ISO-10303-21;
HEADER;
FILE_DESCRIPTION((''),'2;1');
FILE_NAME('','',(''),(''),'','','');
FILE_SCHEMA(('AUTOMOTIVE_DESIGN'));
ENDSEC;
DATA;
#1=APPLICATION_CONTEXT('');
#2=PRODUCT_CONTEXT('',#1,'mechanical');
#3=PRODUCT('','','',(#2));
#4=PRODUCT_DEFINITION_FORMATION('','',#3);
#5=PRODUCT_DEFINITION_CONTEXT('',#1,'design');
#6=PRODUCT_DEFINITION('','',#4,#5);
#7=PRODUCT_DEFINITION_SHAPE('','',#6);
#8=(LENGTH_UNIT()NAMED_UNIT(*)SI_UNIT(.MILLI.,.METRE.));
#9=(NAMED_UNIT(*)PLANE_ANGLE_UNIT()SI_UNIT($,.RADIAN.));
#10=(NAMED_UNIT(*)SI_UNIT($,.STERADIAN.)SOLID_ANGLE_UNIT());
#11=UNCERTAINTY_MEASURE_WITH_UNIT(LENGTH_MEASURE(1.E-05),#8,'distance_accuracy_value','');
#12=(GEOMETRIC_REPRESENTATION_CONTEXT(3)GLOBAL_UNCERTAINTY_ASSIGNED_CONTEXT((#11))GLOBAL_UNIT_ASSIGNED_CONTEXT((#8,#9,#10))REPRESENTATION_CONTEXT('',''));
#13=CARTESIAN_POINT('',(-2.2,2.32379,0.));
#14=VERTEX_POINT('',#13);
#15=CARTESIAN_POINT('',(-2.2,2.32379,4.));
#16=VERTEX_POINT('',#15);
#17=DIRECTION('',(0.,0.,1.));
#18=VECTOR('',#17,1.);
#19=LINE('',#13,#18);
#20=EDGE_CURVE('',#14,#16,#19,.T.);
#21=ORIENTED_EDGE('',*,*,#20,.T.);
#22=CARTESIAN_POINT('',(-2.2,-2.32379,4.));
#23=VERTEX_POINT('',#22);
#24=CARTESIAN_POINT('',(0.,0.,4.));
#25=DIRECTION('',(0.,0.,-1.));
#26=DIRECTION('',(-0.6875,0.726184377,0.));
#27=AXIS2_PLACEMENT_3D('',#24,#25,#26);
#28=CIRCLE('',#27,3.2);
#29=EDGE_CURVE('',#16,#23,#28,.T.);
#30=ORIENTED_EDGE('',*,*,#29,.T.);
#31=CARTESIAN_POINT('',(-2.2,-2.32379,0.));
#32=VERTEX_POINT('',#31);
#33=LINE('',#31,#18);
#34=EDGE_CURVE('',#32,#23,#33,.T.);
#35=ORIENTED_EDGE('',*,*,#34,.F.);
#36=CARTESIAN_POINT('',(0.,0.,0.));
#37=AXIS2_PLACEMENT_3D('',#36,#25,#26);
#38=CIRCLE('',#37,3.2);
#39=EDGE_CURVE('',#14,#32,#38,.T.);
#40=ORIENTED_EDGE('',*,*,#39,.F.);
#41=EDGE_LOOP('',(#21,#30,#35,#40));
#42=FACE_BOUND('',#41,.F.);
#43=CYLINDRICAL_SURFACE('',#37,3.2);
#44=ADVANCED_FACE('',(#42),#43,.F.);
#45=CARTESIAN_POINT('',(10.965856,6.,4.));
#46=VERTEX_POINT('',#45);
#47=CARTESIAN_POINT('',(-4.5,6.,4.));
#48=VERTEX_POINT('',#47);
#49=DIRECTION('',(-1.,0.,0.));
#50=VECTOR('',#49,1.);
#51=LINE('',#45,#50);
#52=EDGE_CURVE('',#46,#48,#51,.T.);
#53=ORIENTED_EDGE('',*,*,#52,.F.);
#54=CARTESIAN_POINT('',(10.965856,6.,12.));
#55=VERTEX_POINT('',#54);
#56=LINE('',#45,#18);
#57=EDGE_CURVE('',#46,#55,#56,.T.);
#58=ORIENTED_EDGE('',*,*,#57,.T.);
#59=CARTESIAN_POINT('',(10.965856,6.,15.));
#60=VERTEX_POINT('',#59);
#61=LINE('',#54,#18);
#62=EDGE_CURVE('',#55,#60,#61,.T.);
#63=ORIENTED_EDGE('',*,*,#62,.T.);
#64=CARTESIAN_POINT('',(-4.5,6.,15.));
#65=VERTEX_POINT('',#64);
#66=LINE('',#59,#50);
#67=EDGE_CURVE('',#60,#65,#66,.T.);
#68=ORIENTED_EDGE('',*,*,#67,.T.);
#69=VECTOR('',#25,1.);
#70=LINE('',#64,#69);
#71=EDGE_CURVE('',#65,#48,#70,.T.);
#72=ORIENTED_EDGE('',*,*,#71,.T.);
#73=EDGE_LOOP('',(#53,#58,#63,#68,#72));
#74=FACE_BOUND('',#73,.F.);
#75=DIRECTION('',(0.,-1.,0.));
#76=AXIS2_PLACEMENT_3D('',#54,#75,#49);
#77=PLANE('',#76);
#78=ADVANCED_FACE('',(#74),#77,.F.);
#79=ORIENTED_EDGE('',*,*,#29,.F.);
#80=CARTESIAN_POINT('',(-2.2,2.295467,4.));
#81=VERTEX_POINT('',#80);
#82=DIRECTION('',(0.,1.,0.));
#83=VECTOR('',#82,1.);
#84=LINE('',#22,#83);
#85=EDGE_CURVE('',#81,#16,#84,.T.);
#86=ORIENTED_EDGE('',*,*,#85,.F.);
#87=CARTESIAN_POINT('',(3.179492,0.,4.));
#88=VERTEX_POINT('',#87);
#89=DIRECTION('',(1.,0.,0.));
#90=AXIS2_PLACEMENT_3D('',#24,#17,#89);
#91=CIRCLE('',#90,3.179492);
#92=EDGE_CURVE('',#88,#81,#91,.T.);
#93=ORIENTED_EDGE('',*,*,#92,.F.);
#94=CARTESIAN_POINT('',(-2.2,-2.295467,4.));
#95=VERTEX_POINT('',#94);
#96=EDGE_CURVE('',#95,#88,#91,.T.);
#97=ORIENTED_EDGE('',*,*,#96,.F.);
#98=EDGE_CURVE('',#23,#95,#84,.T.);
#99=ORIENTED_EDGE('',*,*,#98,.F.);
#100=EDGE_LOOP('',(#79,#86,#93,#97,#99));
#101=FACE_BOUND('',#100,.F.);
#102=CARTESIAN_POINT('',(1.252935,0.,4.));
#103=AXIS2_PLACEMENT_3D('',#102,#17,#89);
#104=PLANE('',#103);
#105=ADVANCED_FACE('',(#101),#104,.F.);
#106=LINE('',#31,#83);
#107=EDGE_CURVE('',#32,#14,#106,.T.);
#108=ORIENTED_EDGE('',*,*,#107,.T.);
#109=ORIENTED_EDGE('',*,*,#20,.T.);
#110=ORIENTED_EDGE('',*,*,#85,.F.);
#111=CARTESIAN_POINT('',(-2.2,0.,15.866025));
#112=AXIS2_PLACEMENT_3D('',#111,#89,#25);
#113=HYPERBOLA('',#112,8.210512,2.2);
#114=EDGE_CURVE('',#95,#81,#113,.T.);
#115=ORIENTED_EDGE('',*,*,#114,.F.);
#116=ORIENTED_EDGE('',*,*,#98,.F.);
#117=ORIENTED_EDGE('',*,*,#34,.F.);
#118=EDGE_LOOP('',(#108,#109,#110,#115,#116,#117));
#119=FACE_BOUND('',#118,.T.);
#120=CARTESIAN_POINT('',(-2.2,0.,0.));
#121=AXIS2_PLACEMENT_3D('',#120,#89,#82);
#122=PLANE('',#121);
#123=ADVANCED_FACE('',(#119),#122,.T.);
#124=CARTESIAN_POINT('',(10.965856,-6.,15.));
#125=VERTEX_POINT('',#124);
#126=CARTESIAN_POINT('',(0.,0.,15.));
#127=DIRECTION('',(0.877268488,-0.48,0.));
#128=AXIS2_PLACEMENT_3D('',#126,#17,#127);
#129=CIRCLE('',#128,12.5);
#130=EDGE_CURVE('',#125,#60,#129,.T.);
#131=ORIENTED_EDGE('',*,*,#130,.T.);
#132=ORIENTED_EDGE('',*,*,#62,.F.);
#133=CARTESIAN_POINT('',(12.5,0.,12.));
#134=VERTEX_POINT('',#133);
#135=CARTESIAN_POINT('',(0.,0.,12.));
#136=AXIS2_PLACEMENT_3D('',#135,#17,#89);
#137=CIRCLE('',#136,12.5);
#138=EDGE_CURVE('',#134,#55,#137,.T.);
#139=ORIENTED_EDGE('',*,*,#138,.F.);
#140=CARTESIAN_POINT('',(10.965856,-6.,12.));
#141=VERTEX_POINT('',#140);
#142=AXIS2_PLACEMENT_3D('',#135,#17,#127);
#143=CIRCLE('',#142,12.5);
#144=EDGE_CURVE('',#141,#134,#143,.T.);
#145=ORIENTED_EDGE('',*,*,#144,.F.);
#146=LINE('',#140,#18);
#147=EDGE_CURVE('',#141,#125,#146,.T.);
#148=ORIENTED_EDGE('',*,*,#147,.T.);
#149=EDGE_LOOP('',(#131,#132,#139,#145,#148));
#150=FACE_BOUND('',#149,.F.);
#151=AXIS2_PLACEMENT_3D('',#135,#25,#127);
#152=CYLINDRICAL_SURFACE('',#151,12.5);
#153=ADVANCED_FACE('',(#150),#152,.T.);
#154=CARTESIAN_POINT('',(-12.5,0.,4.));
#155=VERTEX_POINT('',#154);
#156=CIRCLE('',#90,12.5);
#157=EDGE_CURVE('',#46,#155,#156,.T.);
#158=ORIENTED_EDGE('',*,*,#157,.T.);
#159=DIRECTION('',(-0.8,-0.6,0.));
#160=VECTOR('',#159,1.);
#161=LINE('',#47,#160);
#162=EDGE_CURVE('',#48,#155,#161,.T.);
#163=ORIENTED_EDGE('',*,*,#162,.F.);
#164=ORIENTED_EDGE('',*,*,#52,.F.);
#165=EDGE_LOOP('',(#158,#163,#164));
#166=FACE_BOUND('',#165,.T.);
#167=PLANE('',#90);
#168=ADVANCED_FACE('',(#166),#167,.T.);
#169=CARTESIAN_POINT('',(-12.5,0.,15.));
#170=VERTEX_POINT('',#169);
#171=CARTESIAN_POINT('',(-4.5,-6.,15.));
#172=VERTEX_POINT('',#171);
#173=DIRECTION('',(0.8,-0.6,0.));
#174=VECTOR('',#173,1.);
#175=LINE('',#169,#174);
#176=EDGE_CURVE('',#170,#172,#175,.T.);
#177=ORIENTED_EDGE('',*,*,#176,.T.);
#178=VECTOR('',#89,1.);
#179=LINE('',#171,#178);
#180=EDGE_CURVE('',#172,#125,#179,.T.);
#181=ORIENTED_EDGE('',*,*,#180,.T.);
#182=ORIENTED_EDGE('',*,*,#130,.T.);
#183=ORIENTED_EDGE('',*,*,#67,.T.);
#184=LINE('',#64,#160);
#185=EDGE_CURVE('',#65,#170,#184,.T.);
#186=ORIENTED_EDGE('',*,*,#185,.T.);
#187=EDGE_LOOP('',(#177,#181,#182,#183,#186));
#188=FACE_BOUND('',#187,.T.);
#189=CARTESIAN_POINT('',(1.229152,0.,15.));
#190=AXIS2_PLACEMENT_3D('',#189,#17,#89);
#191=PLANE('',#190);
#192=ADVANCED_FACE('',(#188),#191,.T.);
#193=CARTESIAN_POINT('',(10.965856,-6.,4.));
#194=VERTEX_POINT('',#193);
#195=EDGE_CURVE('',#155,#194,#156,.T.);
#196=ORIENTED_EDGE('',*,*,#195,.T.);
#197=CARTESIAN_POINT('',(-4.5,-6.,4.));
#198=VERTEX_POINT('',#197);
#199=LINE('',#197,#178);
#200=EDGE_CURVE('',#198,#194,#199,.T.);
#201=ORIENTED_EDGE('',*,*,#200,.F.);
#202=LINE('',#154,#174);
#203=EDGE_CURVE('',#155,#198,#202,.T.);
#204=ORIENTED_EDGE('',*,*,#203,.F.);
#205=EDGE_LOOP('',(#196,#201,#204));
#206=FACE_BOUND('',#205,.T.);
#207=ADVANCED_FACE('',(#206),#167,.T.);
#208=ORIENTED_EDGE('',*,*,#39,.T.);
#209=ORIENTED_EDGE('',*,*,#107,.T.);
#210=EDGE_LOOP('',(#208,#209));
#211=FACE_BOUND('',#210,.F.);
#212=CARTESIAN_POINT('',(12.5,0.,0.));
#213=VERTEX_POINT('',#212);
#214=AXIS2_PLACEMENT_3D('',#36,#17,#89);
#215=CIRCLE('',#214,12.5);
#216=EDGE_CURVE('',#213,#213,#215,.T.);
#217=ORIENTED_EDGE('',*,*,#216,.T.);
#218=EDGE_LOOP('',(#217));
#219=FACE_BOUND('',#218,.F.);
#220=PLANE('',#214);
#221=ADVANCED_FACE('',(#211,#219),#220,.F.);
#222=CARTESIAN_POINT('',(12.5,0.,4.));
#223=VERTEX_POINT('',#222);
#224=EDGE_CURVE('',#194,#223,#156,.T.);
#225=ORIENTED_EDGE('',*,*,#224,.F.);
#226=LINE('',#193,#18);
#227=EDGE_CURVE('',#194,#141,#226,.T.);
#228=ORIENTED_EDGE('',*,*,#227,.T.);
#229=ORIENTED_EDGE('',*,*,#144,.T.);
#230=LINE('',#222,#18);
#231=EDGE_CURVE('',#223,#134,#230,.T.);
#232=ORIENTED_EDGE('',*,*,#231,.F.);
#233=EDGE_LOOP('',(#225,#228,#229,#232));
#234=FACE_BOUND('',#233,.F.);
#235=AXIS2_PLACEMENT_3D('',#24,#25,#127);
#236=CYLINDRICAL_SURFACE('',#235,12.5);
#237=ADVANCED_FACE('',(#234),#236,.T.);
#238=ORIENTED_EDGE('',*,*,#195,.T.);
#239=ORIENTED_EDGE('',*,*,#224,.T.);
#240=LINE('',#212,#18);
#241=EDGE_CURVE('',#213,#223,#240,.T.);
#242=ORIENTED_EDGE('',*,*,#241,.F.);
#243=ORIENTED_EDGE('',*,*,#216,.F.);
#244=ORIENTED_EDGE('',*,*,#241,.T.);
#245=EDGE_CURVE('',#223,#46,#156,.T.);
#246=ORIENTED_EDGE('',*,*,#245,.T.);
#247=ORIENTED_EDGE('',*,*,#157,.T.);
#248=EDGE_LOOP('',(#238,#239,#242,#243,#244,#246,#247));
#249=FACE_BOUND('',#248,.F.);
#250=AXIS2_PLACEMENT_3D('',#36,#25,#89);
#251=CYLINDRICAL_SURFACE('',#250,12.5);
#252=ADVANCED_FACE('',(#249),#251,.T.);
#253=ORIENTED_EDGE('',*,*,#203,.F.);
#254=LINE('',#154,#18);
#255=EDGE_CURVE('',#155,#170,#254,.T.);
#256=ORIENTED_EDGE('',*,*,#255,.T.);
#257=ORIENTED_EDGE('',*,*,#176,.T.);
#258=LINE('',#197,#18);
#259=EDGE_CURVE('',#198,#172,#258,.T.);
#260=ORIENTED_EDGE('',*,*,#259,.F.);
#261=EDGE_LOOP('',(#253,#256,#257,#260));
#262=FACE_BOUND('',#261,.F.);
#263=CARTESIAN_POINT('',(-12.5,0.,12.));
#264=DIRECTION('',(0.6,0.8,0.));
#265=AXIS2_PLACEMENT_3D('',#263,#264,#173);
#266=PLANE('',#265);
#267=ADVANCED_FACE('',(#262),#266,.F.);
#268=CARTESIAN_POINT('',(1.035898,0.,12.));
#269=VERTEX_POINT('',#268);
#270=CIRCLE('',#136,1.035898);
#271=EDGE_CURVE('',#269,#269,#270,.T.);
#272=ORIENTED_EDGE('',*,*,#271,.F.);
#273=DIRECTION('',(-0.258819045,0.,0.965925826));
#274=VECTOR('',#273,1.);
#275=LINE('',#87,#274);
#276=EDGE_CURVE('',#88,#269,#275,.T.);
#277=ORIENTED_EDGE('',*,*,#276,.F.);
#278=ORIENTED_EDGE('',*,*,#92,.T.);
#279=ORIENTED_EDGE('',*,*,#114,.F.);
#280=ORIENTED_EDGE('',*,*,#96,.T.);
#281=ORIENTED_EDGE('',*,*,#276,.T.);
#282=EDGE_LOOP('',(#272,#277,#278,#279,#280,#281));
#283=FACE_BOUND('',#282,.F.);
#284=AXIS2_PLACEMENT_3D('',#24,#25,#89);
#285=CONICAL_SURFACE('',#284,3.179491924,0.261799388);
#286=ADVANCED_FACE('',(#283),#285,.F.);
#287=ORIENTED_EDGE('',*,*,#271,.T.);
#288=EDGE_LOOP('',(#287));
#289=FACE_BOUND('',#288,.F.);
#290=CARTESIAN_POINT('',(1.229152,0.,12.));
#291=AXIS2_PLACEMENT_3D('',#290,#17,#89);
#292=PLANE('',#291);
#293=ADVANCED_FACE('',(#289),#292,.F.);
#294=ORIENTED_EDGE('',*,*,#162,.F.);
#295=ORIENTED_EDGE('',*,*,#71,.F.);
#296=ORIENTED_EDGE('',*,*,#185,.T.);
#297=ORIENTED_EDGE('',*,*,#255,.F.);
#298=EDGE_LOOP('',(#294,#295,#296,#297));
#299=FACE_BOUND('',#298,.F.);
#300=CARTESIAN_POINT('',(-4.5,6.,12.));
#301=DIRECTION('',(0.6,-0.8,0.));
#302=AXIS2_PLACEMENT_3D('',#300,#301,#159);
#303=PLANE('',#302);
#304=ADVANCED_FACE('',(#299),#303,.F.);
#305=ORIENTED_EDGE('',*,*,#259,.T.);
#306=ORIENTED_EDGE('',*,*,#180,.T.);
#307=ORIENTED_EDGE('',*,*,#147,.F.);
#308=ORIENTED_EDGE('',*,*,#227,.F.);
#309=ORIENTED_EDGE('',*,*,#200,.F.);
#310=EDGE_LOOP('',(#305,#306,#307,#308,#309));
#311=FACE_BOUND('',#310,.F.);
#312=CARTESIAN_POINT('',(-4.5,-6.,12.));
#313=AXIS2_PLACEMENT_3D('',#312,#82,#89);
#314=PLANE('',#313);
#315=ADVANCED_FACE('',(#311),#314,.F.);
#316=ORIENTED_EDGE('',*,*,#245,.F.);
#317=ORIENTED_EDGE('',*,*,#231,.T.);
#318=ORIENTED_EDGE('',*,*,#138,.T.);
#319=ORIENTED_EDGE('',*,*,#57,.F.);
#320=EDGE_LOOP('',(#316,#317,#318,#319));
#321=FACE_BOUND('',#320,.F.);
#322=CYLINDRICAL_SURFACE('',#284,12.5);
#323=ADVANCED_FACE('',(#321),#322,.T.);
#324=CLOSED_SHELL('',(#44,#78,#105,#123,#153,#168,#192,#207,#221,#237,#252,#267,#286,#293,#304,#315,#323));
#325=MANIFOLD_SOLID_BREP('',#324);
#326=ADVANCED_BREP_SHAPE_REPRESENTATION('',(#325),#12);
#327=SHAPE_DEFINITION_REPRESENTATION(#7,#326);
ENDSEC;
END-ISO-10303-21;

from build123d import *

# Parameters (mm, degrees)
F0_R     = 12.5
F1_DEPTH = 4
F2_R     = 0.5
F3_DEPTH = 8
F6_DEPTH = 3


# Not quite as in the source:
# - a fillet or chamfer that OpenCascade refuses, or shapes differently, is made with other operations: its cross-section is extruded or revolved along the edge and cut away or added


with BuildPart() as f1:
    # F0 (on Top) → F1 (new body)
    with BuildSketch(Plane.XY):
        Circle(F0_R)
        with BuildLine():
            Line((-2.2, -2.3237900077), (-2.2, 2.3237900077))
            ThreePointArc((-2.2, 2.3237900077), (3.2, 0), (-2.2, -2.3237900077))
        make_face(mode=Mode.SUBTRACT)
    extrude(amount=F1_DEPTH)

    # F2 (on face) → F3 (join)
    with BuildSketch(Plane.XY.offset(4)):
        with BuildLine():
            Line((-4.5, 6), (-12.5, 0))
            Line((-12.5, 0), (-4.5, -6))
            Line((-4.5, -6), (10.9658560997, -6))
            ThreePointArc((10.9658560997, -6), (12.1103922572, -3.0965140685), (12.5, 0))
            ThreePointArc((12.5, 0), (12.1103922572, 3.0965140685), (10.9658560997, 6))
            Line((10.9658560997, 6), (-4.5, 6))
        make_face()
        Circle(F2_R, mode=Mode.SUBTRACT)
    extrude(amount=F3_DEPTH)

    # F4: chamfer of 10 x 2.6794919243 on 1 edges, made by hand


with BuildPart() as f4_tool2:
    # F4_s3 → F4_t4 (revolve)
    with BuildSketch(Plane.XZ):
        Polygon((3.1794919243, 4), (0.5, 14), (0.5, 4), align=None)
    revolve(axis=Axis((0, 0, 4), (0, 0, 1)))

    split(bisect_by=Plane.YZ.offset(-2.2), keep=Keep.TOP)


with BuildPart() as f1_1:
    add(f1.part)

    # F4_t1: cut F4_tool2
    add(f4_tool2.part, mode=Mode.SUBTRACT)

    # F5 (on face) → F6 (join)
    with BuildSketch(Plane.XY.offset(12)):
        with BuildLine():
            Line((-4.5, 6), (-12.5, 0))
            Line((-12.5, 0), (-4.5, -6))
            Line((-4.5, -6), (10.9658560997, -6))
            ThreePointArc((10.9658560997, -6), (12.5, 0), (10.9658560997, 6))
            Line((10.9658560997, 6), (-4.5, 6))
        make_face()
    extrude(amount=F6_DEPTH)


solid = f1_1.part
